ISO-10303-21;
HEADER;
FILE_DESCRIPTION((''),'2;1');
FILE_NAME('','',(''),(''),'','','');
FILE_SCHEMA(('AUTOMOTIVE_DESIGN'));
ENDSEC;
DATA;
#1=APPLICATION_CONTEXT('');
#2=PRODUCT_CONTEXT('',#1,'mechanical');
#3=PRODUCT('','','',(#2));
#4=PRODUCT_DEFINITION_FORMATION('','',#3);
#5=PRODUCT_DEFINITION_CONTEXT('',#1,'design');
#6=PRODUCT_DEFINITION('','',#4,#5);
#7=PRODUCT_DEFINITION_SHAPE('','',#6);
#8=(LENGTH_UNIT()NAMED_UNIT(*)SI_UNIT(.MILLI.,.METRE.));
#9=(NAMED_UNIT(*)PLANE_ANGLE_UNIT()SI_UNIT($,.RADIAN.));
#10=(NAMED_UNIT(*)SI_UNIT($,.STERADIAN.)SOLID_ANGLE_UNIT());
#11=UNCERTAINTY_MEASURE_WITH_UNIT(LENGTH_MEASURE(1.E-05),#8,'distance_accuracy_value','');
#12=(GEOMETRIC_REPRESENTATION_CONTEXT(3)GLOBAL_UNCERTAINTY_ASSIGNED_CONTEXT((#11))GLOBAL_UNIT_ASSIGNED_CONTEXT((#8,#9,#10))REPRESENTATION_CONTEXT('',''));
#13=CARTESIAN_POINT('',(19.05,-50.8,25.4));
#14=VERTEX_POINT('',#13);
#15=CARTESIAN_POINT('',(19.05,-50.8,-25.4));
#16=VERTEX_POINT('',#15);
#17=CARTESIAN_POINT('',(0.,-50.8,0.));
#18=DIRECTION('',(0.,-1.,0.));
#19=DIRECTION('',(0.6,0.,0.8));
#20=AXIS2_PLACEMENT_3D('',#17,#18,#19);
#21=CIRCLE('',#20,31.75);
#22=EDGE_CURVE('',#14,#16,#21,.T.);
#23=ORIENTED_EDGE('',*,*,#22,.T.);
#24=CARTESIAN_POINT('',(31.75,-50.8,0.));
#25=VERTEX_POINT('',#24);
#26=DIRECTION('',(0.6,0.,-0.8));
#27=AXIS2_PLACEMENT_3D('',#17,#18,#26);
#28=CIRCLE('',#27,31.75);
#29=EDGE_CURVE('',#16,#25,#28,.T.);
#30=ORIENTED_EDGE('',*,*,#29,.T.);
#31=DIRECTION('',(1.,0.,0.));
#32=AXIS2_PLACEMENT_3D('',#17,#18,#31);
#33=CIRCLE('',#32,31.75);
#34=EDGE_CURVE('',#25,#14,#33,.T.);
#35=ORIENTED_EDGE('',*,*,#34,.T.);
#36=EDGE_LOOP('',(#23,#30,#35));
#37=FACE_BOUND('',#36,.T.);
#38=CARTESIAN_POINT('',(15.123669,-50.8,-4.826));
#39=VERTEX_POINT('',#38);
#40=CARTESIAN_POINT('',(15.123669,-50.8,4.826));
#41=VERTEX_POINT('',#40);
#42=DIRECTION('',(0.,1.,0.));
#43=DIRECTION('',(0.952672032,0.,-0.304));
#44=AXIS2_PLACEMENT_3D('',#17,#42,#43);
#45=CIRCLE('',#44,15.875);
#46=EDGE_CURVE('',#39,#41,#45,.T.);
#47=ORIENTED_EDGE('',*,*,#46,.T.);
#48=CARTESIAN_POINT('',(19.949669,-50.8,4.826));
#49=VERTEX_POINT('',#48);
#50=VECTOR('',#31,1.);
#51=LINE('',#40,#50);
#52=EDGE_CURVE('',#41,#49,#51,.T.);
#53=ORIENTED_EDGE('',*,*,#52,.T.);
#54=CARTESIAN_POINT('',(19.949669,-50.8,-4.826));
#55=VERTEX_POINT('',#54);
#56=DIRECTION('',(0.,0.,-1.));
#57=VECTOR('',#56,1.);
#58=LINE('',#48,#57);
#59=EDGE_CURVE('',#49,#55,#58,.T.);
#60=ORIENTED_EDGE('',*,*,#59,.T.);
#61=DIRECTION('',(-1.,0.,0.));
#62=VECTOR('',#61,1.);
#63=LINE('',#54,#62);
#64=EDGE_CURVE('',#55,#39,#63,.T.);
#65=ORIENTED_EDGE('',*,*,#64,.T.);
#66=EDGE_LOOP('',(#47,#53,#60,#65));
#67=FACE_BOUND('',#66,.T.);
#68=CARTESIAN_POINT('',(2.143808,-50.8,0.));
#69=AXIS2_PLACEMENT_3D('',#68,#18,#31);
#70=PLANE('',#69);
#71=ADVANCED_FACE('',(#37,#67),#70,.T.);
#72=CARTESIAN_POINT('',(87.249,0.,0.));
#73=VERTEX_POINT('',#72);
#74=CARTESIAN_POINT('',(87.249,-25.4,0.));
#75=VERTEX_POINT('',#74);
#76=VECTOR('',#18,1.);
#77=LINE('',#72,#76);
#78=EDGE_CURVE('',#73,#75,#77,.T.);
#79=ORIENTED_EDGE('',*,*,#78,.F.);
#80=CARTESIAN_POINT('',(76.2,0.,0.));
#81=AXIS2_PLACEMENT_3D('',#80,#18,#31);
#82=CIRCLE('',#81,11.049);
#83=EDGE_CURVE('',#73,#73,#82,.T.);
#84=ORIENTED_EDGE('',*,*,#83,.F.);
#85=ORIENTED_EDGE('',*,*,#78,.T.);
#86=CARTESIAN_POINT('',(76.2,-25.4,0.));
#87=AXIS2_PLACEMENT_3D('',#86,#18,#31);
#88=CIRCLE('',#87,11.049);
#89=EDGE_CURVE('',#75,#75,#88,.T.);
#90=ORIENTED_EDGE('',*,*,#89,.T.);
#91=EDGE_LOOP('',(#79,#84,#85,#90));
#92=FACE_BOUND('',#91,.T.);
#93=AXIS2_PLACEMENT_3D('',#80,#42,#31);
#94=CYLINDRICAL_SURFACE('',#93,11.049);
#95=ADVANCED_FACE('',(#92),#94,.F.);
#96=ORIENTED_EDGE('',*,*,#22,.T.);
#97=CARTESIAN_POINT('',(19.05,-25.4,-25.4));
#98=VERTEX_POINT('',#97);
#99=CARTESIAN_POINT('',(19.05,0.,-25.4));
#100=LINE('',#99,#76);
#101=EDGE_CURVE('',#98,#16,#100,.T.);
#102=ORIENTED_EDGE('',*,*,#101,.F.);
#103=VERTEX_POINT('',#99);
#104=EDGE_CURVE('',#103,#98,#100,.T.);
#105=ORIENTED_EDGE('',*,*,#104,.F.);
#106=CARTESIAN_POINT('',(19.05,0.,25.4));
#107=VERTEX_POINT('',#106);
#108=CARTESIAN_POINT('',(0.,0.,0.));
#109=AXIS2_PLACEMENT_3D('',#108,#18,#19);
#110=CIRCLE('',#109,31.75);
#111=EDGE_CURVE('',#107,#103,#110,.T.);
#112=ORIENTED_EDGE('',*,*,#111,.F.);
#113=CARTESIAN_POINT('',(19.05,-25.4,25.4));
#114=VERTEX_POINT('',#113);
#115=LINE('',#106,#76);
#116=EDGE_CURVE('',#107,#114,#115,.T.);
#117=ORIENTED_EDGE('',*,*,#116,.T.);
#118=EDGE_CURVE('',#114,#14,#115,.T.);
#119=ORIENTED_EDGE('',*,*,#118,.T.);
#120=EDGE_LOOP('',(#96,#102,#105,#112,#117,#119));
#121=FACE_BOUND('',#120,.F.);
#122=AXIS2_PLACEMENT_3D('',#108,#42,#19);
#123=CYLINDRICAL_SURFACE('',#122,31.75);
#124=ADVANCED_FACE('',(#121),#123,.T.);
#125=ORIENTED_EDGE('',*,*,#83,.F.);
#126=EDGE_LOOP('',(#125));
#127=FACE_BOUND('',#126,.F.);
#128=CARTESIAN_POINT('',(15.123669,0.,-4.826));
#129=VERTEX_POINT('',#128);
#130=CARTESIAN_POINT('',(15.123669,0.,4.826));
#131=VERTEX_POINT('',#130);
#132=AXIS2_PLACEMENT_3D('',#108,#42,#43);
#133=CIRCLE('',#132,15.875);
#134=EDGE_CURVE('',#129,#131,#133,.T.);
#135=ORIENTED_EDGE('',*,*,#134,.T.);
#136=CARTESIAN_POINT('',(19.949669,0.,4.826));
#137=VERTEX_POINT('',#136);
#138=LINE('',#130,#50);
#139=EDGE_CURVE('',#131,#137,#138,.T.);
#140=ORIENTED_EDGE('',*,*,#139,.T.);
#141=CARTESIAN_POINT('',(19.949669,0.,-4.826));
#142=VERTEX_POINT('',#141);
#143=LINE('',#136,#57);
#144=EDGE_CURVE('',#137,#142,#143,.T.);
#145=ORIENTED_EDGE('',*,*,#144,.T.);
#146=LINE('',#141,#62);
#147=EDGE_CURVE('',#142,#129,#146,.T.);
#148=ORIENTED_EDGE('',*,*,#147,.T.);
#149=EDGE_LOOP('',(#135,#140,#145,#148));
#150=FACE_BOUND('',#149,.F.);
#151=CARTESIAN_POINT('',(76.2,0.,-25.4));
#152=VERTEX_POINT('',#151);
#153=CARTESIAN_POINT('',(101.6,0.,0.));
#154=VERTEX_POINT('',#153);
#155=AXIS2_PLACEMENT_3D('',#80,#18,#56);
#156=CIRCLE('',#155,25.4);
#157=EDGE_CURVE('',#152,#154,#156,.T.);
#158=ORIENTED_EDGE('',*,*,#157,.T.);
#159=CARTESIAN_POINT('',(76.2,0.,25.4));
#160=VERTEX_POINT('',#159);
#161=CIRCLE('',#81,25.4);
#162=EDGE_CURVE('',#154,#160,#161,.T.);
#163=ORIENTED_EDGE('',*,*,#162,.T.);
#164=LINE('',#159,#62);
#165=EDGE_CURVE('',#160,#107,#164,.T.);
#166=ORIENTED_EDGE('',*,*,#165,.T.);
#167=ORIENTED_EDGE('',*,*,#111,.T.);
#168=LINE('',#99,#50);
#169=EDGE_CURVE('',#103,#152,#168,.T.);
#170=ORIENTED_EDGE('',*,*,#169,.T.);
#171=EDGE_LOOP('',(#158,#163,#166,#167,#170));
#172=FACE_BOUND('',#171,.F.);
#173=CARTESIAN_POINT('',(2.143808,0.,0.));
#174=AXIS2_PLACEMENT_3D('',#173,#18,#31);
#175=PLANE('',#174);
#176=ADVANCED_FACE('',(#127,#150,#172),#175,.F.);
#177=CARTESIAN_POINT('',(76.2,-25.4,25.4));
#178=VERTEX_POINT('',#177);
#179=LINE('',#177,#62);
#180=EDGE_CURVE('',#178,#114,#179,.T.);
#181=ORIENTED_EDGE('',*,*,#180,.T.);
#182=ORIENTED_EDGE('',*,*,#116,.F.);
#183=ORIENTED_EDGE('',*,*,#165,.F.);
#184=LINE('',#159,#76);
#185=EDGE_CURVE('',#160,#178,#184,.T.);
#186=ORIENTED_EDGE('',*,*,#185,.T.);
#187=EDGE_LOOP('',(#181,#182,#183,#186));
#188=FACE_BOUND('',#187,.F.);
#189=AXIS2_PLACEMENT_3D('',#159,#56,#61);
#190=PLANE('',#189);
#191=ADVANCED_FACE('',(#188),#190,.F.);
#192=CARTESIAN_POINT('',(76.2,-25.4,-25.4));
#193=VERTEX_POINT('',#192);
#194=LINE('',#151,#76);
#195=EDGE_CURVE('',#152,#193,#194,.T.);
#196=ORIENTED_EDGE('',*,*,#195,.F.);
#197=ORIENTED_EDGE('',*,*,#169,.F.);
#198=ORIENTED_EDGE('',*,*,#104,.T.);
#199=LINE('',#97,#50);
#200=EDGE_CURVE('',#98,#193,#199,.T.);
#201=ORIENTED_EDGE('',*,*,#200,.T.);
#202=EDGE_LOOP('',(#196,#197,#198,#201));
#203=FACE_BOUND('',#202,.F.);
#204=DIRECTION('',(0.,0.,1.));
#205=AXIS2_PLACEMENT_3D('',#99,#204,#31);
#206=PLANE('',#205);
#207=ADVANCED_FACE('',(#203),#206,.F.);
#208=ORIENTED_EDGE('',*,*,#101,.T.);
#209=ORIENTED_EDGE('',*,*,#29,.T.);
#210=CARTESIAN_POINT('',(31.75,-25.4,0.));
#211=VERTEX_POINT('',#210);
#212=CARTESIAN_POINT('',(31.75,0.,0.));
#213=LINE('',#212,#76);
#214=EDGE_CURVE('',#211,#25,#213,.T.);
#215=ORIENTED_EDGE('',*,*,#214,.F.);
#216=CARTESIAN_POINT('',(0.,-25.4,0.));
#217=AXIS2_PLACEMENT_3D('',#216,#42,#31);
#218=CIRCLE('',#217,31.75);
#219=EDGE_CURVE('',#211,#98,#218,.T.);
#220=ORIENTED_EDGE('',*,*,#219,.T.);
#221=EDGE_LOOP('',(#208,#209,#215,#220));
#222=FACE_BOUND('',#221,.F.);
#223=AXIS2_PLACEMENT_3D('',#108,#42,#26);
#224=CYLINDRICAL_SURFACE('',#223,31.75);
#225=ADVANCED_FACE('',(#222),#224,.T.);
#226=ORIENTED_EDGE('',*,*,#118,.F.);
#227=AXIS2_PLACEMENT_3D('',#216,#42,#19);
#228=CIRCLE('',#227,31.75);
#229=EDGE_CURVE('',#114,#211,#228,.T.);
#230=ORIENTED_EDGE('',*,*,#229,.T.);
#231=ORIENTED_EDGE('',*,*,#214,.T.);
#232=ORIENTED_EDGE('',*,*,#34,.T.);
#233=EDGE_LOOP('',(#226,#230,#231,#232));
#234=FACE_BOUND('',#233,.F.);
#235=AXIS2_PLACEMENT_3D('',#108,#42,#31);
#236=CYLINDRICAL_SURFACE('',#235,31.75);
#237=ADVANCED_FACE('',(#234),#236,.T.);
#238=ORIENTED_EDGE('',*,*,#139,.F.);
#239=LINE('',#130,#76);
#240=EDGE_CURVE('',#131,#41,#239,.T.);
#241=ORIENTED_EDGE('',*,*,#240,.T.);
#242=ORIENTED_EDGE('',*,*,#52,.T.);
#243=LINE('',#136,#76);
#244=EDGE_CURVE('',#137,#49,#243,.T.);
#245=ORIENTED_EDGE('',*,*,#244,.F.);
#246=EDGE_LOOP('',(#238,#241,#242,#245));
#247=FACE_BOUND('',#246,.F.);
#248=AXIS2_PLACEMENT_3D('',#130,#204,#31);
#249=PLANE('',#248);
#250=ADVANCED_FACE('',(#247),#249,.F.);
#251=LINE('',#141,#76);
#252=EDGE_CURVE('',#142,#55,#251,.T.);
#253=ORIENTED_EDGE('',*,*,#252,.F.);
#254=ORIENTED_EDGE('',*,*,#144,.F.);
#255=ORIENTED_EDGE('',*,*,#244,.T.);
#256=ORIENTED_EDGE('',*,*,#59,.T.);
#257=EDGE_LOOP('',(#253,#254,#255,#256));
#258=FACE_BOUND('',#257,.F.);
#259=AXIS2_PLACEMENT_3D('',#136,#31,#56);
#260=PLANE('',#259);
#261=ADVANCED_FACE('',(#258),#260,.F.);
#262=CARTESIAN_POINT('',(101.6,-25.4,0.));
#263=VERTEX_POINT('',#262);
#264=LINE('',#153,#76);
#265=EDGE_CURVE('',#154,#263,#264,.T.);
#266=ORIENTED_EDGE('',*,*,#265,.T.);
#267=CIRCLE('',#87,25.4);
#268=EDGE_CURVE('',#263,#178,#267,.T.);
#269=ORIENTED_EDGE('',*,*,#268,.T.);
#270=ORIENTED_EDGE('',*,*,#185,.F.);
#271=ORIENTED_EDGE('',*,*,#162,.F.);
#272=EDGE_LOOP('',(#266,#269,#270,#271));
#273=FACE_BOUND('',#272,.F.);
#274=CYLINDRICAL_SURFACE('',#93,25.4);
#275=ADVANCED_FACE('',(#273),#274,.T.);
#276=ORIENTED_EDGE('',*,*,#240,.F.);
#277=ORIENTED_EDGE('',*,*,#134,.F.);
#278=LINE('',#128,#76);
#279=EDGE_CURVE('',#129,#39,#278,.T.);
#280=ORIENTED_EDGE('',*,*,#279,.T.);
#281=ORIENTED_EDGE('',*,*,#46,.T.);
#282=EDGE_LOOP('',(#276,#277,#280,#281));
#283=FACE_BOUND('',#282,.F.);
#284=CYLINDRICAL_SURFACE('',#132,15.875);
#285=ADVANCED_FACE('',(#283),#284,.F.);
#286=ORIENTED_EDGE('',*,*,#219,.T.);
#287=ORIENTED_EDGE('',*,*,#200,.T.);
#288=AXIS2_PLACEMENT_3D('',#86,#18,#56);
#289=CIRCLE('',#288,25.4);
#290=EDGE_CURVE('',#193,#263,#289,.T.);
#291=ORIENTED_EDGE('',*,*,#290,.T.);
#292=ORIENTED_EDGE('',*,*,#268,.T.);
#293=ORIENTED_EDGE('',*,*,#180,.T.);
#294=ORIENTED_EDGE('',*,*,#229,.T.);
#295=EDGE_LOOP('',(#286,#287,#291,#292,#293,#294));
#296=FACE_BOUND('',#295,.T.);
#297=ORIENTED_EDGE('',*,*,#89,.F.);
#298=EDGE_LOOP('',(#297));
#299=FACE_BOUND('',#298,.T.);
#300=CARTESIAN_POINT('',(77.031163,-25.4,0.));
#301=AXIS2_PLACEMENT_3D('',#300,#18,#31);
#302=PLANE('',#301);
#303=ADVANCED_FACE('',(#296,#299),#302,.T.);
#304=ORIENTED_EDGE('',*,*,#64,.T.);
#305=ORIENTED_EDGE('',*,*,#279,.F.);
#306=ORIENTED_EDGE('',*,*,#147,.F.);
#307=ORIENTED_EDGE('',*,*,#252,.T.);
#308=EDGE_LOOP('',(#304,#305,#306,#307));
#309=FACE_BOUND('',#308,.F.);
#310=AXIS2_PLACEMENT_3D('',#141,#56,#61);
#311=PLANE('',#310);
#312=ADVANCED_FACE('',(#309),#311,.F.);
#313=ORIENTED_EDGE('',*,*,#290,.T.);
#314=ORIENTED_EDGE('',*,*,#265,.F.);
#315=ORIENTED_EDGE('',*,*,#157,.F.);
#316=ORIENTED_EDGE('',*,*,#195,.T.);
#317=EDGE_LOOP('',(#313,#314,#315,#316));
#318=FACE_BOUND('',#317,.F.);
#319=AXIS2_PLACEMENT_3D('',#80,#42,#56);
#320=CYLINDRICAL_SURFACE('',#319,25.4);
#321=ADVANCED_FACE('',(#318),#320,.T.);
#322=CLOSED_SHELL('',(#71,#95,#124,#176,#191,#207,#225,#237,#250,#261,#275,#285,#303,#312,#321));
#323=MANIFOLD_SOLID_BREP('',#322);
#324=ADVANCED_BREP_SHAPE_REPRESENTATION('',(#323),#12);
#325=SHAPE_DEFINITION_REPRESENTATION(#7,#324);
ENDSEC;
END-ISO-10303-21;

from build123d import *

# Parameters (mm, degrees)
F0_R     = 11.049
F1_DEPTH = 25.4
F2_DEPTH = 50.8


# Not quite as in the source:
# - a feature names something its author has since deleted; it is built from what else it names


with BuildPart() as f1:
    # F0 (on Front) → F1 (new body)
    with BuildSketch(Plane.XZ):
        with BuildLine():
            ThreePointArc((101.6, 0), (94.1605122421, 17.9605122421), (76.2, 25.4))
            ThreePointArc((76.2, 25.4), (50.8, 0), (76.2, -25.4))
            ThreePointArc((76.2, -25.4), (94.1605122421, -17.9605122421), (101.6, 0))
        make_face()
        with Locations((76.2, 0)):
            Circle(F0_R, mode=Mode.SUBTRACT)
        with BuildLine():
            ThreePointArc((19.05, 25.4), (28.3980633142, 14.1990316571), (31.75, 0))
            ThreePointArc((31.75, 0), (28.3980633142, -14.1990316571), (19.05, -25.4))
            Line((19.05, -25.4), (76.2, -25.4))
            ThreePointArc((76.2, -25.4), (50.8, 0), (76.2, 25.4))
            Line((76.2, 25.4), (19.05, 25.4))
        make_face()
    extrude(amount=F1_DEPTH)

    # F0 (on Front) → F2 (join)
    with BuildSketch(Plane.XZ):
        with BuildLine():
            ThreePointArc((19.05, -25.4), (28.3980633142, -14.1990316571), (31.75, 0))
            ThreePointArc((31.75, 0), (28.3980633142, 14.1990316571), (19.05, 25.4))
            ThreePointArc((19.05, 25.4), (-31.75, 0), (19.05, -25.4))
        make_face()
        with BuildLine():
            ThreePointArc((15.1236685034, -4.826), (-15.875, 0), (15.1236685034, 4.826))
            Line((15.1236685034, 4.826), (19.9496685034, 4.826))
            Line((19.9496685034, 4.826), (19.9496685034, -4.826))
            Line((19.9496685034, -4.826), (15.1236685034, -4.826))
        make_face(mode=Mode.SUBTRACT)
    extrude(amount=F2_DEPTH)


solid = f1.part
